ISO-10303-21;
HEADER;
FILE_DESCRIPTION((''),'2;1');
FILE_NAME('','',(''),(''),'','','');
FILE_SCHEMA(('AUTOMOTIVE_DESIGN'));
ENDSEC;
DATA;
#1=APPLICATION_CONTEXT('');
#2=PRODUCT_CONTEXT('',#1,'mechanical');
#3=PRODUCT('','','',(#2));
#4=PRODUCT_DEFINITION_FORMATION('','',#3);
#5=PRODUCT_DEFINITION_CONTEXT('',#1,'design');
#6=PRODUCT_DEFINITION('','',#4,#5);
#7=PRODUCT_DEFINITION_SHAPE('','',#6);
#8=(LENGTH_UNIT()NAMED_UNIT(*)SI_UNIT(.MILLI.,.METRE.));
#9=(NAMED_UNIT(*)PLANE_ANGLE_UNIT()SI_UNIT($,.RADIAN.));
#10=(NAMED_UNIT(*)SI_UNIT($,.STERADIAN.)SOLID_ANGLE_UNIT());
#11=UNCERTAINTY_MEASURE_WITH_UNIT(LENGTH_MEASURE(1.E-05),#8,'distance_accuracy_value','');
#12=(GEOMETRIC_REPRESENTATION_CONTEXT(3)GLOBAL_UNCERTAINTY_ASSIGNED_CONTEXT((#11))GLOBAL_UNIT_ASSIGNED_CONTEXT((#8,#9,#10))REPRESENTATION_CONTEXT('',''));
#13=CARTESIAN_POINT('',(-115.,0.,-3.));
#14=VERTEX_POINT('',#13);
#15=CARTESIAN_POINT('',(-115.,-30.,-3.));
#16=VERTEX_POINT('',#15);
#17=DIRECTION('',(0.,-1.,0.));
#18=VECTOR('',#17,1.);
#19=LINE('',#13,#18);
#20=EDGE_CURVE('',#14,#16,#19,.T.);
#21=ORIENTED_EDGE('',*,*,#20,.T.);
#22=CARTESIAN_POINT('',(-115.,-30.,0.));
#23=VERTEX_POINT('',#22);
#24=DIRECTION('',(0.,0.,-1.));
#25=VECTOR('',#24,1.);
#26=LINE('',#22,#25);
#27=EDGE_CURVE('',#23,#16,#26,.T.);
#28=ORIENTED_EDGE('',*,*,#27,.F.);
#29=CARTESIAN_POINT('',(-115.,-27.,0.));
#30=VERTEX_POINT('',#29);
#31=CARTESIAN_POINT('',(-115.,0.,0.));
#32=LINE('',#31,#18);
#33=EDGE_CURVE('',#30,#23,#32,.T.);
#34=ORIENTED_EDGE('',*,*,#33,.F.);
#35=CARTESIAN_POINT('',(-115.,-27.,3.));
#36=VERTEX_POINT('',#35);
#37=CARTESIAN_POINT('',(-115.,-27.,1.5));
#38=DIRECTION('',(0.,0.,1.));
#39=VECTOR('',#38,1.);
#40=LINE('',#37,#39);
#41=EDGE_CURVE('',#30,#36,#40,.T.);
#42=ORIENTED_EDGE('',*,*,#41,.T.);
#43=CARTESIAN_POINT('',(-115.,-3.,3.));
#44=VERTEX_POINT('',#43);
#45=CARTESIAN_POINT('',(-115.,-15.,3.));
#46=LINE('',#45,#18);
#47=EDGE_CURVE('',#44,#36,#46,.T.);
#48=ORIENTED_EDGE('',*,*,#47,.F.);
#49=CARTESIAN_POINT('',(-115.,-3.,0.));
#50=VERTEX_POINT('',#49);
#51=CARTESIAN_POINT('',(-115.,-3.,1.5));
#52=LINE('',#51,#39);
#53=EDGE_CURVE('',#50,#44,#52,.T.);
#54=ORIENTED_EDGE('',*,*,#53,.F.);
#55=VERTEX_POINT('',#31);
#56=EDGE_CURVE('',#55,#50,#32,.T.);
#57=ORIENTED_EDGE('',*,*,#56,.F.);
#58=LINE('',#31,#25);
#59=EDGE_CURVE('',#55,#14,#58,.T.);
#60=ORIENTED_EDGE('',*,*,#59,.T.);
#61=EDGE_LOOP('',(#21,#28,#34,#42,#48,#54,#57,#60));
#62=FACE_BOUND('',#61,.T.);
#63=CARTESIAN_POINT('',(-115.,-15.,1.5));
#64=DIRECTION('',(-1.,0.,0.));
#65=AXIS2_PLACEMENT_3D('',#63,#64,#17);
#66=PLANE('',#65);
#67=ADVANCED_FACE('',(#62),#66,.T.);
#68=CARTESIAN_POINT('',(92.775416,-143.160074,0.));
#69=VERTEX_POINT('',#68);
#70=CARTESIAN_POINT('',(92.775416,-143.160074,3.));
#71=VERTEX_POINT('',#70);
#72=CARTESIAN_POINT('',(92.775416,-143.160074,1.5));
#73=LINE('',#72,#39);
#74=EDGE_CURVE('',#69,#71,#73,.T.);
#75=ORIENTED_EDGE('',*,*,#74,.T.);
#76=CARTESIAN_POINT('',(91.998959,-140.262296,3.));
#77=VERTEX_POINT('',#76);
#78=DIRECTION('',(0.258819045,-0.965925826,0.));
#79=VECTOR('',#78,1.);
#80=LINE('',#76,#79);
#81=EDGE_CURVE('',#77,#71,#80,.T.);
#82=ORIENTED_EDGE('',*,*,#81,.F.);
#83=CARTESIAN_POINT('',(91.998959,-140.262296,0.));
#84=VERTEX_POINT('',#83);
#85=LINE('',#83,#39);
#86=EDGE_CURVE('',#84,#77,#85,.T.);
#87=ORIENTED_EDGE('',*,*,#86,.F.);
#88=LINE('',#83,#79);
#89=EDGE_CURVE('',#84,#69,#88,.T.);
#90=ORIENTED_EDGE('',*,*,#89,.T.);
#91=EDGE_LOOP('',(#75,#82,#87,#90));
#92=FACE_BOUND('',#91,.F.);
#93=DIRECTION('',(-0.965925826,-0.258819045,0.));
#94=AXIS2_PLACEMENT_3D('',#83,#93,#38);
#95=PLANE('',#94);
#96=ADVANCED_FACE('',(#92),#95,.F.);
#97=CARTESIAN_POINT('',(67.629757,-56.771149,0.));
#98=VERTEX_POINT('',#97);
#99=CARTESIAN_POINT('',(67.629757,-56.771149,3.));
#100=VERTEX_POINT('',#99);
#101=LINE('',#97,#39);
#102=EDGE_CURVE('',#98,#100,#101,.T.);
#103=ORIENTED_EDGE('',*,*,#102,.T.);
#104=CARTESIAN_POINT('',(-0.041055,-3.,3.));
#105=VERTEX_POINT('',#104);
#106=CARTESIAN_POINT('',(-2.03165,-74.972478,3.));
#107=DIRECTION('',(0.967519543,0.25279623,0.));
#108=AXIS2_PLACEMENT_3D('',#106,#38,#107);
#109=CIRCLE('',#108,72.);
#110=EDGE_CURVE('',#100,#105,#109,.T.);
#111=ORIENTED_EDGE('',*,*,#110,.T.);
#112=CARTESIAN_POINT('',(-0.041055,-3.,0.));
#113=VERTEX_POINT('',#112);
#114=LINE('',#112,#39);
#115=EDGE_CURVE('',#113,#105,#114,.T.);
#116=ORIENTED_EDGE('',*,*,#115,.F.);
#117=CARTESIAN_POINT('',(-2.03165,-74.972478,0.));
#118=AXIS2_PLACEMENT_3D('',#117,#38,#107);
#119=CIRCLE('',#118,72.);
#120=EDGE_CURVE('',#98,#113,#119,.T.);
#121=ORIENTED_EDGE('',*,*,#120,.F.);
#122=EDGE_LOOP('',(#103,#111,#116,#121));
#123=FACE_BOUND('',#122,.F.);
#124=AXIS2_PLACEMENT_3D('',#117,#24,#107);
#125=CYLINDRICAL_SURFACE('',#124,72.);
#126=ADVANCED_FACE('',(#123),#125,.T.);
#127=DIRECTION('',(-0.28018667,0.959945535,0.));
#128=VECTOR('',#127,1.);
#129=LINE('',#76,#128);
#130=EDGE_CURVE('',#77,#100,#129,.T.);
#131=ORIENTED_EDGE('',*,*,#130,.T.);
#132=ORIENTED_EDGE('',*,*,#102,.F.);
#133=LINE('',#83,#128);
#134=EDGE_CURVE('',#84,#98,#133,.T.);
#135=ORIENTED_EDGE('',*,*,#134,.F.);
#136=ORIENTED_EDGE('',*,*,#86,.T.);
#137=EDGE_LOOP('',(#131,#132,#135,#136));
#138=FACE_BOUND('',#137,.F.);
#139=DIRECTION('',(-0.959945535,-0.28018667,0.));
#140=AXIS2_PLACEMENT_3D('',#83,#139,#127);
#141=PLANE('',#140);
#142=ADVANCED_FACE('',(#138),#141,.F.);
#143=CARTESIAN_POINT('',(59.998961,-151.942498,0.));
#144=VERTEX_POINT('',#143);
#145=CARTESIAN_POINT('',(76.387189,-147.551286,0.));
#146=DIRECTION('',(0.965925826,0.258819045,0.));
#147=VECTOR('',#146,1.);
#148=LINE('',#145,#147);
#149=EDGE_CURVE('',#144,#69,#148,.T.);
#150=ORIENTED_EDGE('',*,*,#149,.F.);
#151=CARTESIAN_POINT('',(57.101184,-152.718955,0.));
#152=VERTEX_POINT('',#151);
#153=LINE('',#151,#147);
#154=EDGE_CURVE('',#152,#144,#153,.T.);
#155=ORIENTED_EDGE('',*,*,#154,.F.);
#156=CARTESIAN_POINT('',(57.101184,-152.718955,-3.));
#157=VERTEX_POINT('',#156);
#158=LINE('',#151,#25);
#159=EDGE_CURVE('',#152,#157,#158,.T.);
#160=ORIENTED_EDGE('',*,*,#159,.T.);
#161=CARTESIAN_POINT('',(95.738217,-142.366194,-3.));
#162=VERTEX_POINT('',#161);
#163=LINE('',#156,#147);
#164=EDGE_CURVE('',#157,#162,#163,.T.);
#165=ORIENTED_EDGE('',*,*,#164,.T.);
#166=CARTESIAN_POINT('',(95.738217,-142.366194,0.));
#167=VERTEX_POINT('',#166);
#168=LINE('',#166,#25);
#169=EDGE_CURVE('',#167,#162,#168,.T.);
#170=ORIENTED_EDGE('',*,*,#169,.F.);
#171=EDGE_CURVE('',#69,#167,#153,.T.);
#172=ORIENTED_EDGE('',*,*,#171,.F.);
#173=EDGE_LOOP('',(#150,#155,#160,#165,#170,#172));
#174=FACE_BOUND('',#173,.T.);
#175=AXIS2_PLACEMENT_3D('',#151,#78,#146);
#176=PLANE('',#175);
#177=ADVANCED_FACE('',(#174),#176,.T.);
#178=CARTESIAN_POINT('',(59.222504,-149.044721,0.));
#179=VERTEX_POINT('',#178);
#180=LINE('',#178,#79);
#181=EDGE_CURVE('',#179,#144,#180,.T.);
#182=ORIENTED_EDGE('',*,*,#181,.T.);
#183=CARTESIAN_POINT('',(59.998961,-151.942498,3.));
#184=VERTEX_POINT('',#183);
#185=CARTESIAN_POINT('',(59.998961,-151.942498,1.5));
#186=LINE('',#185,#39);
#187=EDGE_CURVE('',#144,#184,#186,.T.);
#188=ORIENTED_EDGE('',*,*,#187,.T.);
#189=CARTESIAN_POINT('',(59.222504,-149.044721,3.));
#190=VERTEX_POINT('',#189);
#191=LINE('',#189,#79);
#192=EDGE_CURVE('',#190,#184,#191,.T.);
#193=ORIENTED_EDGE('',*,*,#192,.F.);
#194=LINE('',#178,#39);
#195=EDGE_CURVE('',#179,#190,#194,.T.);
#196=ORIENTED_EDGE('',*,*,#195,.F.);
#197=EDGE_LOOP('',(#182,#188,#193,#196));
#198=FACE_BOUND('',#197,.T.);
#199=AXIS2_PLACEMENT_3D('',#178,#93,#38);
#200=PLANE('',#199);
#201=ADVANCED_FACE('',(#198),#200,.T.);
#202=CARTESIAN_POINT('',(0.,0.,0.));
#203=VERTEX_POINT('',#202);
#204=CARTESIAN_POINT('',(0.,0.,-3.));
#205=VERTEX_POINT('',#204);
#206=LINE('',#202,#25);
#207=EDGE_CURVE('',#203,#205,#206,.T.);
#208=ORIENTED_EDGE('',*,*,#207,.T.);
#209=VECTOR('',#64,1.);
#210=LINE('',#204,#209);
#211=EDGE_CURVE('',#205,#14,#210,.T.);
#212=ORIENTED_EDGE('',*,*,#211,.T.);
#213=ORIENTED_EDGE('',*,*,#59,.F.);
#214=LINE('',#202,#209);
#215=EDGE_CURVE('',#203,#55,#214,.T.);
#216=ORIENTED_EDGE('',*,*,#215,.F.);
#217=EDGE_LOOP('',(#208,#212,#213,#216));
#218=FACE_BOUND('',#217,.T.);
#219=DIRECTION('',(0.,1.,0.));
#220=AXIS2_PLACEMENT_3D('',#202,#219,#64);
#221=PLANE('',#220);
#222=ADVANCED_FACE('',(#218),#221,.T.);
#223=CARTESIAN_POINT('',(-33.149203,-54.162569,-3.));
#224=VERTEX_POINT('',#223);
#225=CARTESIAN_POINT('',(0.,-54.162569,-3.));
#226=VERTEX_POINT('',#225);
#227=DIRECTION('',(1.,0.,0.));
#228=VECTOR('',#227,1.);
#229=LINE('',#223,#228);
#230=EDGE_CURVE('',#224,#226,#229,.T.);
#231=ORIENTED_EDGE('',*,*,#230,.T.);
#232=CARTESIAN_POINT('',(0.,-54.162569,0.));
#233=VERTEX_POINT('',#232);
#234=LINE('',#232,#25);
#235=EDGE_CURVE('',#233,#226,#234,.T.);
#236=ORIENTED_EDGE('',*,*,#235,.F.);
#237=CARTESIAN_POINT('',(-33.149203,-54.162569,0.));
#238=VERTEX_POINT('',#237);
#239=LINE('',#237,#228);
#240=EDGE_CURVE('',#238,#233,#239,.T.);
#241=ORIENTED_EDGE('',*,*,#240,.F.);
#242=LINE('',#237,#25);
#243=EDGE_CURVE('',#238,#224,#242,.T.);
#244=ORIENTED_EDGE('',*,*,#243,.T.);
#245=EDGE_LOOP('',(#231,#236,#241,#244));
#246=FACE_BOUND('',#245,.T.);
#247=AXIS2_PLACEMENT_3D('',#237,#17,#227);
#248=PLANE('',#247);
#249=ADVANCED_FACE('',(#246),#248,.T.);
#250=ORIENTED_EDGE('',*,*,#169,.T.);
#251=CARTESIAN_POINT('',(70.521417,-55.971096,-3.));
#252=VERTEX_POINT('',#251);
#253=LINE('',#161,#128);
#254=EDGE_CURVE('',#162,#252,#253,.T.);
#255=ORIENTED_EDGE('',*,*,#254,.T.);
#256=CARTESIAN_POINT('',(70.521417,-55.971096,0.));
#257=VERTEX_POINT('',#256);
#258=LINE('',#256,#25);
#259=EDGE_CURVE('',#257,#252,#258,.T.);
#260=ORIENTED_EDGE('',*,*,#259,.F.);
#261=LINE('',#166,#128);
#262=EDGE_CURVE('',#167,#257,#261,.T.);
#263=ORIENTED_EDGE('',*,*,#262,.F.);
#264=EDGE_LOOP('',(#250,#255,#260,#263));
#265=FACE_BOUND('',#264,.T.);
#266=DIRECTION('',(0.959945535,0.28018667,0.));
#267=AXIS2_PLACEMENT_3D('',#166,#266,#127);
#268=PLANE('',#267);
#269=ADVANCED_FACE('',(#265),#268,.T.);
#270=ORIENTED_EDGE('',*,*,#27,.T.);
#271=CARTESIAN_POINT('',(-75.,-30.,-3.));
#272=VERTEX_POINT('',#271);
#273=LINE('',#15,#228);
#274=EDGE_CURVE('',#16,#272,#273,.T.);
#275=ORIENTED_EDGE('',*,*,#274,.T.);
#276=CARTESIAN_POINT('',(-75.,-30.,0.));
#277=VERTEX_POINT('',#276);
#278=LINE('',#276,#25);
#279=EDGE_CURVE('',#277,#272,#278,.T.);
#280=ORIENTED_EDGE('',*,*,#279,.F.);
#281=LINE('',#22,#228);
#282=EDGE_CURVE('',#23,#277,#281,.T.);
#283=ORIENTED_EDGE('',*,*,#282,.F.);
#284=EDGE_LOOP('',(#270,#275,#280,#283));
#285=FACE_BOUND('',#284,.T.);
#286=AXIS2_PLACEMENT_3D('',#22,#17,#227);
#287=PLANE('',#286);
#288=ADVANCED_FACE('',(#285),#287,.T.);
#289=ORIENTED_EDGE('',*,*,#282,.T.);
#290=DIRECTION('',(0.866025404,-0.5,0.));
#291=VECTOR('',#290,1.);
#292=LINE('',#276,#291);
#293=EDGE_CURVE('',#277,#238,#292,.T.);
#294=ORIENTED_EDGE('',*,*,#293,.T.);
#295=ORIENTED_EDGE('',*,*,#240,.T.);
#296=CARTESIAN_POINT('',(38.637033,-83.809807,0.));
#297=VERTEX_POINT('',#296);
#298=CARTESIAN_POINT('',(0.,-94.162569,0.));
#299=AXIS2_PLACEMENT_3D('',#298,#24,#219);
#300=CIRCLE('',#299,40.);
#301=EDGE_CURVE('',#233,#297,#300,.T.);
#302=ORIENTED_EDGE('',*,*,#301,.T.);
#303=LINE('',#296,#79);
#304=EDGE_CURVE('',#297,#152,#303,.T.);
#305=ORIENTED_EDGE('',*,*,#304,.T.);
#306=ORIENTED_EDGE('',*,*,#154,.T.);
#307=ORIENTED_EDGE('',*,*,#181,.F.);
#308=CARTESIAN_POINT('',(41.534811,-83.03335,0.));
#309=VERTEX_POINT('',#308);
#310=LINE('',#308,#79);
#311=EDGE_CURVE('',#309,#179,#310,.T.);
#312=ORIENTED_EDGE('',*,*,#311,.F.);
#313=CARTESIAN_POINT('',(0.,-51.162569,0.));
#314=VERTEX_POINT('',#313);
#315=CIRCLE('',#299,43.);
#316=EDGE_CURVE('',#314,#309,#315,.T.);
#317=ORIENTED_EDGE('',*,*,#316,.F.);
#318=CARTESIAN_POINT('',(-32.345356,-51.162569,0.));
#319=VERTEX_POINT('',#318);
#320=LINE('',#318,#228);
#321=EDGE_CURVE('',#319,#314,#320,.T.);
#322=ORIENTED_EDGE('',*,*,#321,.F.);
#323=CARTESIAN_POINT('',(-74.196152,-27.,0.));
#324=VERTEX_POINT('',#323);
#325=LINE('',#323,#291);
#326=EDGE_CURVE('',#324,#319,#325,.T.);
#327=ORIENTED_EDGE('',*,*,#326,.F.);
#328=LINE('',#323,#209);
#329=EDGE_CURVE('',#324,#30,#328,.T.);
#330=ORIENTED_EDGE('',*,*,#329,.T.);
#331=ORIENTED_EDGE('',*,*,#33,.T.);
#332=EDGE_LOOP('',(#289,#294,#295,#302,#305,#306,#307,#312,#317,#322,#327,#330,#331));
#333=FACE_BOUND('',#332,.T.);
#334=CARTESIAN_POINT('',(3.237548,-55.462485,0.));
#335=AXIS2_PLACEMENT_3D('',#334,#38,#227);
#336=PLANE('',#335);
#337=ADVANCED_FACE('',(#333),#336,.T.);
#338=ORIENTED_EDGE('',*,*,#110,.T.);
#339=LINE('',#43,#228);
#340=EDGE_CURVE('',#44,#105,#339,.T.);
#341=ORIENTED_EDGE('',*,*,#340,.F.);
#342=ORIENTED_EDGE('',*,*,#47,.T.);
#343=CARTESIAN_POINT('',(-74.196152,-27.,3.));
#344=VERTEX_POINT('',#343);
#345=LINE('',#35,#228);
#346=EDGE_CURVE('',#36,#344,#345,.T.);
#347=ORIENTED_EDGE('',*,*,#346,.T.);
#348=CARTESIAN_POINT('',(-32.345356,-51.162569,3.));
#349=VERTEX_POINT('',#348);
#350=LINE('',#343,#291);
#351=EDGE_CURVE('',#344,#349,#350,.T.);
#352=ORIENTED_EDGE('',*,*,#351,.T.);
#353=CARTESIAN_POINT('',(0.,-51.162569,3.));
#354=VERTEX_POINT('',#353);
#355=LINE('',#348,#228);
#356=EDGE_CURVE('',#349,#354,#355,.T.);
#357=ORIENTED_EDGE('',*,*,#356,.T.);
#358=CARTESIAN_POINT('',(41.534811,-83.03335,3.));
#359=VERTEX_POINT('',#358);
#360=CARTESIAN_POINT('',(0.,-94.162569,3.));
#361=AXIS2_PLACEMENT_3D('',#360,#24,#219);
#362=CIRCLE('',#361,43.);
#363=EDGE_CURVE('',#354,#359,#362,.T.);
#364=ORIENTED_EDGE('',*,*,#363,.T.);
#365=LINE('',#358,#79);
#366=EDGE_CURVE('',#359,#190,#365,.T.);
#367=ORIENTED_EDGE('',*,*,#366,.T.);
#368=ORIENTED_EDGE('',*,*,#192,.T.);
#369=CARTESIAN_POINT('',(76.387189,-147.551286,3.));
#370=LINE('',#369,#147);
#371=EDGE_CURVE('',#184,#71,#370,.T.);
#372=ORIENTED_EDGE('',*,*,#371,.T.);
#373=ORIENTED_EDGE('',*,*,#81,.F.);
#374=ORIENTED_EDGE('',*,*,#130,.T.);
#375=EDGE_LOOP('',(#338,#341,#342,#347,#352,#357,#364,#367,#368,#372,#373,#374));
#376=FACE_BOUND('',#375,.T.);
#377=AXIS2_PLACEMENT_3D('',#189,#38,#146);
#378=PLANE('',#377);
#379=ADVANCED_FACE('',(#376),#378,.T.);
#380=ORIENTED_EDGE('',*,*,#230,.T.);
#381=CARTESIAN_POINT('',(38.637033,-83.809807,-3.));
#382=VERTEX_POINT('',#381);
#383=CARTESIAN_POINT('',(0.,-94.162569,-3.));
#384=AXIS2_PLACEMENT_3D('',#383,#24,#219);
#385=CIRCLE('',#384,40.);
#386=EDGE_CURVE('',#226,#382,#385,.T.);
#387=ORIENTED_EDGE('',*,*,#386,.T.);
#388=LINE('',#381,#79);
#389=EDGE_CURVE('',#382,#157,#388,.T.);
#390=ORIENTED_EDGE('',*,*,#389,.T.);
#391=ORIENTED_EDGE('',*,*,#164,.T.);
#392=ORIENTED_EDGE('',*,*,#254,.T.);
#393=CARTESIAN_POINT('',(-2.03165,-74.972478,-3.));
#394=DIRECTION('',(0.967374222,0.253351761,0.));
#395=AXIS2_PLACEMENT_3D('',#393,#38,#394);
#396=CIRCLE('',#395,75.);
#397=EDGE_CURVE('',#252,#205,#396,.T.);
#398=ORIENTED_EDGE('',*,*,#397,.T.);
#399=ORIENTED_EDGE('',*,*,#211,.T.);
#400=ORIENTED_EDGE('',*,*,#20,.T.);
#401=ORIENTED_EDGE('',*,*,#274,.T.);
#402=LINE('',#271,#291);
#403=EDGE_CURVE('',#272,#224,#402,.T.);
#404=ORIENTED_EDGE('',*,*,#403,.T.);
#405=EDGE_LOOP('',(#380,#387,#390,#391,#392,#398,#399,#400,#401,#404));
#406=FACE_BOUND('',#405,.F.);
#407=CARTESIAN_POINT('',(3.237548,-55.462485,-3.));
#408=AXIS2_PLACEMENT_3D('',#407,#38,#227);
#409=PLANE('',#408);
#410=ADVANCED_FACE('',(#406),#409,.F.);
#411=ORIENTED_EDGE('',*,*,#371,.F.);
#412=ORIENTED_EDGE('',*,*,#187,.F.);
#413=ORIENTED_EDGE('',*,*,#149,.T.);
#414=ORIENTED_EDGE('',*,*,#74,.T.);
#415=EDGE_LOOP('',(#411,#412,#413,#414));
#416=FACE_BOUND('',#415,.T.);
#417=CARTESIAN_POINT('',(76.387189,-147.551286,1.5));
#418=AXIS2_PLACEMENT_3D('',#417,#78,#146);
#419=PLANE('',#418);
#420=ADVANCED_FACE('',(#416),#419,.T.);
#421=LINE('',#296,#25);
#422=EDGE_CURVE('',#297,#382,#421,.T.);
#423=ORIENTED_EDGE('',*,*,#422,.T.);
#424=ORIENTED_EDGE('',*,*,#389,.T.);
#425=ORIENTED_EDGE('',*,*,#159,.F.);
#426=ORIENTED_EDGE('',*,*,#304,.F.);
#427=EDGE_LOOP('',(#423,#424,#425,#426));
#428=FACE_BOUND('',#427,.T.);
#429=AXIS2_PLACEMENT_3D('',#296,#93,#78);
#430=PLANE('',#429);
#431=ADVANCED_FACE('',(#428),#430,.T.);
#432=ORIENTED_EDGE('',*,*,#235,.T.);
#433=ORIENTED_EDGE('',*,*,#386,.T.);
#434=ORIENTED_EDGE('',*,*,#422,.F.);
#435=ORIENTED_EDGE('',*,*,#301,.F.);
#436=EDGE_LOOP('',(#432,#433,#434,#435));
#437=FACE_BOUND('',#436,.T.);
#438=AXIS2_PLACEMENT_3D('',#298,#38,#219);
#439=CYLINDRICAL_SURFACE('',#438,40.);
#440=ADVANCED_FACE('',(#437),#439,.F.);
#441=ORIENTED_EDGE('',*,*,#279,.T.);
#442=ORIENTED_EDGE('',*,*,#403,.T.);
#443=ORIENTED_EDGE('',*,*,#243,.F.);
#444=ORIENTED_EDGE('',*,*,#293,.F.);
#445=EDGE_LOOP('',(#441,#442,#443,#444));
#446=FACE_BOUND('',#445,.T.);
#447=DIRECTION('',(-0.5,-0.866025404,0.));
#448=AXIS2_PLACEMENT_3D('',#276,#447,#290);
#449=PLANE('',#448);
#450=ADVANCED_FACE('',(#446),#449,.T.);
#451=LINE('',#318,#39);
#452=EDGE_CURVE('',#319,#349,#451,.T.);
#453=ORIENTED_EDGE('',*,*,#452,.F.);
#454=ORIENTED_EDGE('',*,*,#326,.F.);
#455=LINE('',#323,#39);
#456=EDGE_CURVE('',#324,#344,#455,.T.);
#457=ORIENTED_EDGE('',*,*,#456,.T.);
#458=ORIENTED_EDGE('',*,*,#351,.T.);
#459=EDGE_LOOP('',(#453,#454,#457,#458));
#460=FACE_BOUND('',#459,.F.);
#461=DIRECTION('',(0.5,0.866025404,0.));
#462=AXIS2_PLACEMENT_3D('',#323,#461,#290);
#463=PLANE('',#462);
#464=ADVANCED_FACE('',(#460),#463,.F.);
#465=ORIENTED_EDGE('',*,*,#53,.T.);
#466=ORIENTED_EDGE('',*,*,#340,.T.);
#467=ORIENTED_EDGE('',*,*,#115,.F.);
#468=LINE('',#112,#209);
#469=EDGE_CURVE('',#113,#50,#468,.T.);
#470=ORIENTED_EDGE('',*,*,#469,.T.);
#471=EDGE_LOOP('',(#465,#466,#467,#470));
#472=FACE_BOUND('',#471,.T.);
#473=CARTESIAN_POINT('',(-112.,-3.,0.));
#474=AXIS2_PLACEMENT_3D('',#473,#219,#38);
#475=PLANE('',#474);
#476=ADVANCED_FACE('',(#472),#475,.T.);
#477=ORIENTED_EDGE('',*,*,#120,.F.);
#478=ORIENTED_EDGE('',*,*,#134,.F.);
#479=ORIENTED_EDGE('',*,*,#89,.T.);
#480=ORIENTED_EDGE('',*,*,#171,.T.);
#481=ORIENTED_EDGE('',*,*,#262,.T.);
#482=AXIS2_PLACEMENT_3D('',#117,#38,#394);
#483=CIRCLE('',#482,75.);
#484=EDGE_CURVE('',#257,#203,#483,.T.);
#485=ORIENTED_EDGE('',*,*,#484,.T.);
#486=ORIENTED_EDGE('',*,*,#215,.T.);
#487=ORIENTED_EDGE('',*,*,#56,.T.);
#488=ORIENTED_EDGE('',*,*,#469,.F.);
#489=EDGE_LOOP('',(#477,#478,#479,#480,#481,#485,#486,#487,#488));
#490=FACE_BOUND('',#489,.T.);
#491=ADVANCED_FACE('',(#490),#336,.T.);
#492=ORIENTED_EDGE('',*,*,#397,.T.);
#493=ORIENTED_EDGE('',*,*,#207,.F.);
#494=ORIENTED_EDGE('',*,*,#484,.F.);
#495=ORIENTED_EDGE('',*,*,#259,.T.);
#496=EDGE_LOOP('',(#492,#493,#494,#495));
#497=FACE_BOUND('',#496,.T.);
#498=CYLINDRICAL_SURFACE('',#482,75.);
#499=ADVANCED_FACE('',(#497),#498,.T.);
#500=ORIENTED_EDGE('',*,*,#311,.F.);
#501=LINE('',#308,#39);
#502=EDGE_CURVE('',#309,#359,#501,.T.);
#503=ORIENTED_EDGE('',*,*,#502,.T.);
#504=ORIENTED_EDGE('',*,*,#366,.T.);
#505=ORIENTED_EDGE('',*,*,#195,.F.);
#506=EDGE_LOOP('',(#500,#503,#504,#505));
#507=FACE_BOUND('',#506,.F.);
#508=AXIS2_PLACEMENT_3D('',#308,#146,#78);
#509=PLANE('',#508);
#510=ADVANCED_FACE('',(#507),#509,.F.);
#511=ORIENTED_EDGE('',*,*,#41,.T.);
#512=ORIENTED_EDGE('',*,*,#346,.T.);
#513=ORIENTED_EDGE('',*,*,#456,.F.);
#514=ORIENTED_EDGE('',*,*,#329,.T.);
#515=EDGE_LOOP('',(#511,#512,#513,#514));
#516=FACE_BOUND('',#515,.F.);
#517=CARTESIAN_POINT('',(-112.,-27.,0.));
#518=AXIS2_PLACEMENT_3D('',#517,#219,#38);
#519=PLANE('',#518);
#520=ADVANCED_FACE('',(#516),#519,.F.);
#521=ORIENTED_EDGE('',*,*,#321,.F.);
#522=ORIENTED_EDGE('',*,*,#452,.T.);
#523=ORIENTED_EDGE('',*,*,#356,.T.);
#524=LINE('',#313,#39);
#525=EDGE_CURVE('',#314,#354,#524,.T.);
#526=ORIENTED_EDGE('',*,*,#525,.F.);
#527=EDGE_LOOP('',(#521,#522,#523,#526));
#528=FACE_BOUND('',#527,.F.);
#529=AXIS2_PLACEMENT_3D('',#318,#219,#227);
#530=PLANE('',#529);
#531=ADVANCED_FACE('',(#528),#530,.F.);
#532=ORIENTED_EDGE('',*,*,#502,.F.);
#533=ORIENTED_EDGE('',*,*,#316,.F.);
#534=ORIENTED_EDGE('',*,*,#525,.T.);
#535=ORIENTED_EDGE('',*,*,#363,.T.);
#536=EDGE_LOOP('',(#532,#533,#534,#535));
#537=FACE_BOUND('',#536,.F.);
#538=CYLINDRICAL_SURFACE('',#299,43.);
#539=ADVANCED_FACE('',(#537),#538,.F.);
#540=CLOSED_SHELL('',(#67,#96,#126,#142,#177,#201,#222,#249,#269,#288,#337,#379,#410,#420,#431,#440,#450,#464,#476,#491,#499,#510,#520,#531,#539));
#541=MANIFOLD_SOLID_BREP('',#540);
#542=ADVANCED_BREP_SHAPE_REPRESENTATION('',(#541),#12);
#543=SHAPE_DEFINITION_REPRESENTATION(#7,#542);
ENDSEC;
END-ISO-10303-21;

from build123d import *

# Parameters (mm, degrees)
F1_DEPTH = 3
F3_DEPTH = 3
F4_W     = 24
F4_H     = 3
F5_DEPTH = 3
F6_W     = 33.9326828589
F6_H     = 3
F7_DEPTH = 3


with BuildPart() as f1:
    # F0 (on Top) → F1 (new body)
    with BuildSketch(Plane.XY):
        with BuildLine():
            ThreePointArc((70.5214165197, -55.9710955009), (44.5935670538, -16.2265064733), (0, 0))
            Line((0, 0), (-115, 0))
            Line((-115, 0), (-115, -30))
            Line((-115, -30), (-75, -30))
            Line((-75, -30), (-33.1492031744, -54.1625688131))
            Line((-33.1492031744, -54.1625688131), (0, -54.1625688131))
            ThreePointArc((0, -54.1625688131), (24.3504571603, -62.4284352014), (38.6370330516, -83.809807009))
            Line((38.6370330516, -83.809807009), (57.1011837292, -152.7189554564))
            Line((57.1011837292, -152.7189554564), (95.7382167807, -142.3661936523))
            Line((95.7382167807, -142.3661936523), (70.5214165197, -55.9710955009))
        make_face()
    extrude(amount=-F1_DEPTH)

    # F2 (on face) → F3 (join)
    with BuildSketch(Plane.XY):
        with BuildLine():
            ThreePointArc((0, -51.1625688131), (26.1767414474, -60.0483751805), (41.5348105304, -83.0333498737))
            Line((41.5348105304, -83.0333498737), (59.2225040727, -149.0447208423))
            Line((59.2225040727, -149.0447208423), (91.9989588014, -140.262296267))
            Line((91.9989588014, -140.262296267), (67.629756974, -56.7711490177))
            ThreePointArc((67.629756974, -56.7711490177), (42.7604972061, -18.6017091288), (-0.0410552786, -3))
            Line((-0.0410552786, -3), (-112, -3))
            Line((-112, -3), (-112, -27))
            Line((-112, -27), (-74.1961524227, -27))
            Line((-74.1961524227, -27), (-32.3453555971, -51.1625688131))
            Line((-32.3453555971, -51.1625688131), (0, -51.1625688131))
        make_face()
    extrude(amount=F3_DEPTH)

    # F4 (on face) → F5 (join)
    with BuildSketch(Plane(origin=(-112, 0, 0), x_dir=(0, -1, 0), z_dir=(-1, 0, 0))):
        with Locations((15, 1.5)):
            Rectangle(F4_W, F4_H)
    extrude(amount=F5_DEPTH)

    # F6 (on face) → F7 (join)
    with BuildSketch(Plane(origin=(41.2283357456, -153.866243714, 0), x_dir=(0.9659258263, 0.2588190451, 0), z_dir=(0.2588190451, -0.9659258263, 0))):
        with Locations((35.5952752848, 1.5)):
            Rectangle(F6_W, F6_H)
    extrude(amount=F7_DEPTH)


solid = f1.part
